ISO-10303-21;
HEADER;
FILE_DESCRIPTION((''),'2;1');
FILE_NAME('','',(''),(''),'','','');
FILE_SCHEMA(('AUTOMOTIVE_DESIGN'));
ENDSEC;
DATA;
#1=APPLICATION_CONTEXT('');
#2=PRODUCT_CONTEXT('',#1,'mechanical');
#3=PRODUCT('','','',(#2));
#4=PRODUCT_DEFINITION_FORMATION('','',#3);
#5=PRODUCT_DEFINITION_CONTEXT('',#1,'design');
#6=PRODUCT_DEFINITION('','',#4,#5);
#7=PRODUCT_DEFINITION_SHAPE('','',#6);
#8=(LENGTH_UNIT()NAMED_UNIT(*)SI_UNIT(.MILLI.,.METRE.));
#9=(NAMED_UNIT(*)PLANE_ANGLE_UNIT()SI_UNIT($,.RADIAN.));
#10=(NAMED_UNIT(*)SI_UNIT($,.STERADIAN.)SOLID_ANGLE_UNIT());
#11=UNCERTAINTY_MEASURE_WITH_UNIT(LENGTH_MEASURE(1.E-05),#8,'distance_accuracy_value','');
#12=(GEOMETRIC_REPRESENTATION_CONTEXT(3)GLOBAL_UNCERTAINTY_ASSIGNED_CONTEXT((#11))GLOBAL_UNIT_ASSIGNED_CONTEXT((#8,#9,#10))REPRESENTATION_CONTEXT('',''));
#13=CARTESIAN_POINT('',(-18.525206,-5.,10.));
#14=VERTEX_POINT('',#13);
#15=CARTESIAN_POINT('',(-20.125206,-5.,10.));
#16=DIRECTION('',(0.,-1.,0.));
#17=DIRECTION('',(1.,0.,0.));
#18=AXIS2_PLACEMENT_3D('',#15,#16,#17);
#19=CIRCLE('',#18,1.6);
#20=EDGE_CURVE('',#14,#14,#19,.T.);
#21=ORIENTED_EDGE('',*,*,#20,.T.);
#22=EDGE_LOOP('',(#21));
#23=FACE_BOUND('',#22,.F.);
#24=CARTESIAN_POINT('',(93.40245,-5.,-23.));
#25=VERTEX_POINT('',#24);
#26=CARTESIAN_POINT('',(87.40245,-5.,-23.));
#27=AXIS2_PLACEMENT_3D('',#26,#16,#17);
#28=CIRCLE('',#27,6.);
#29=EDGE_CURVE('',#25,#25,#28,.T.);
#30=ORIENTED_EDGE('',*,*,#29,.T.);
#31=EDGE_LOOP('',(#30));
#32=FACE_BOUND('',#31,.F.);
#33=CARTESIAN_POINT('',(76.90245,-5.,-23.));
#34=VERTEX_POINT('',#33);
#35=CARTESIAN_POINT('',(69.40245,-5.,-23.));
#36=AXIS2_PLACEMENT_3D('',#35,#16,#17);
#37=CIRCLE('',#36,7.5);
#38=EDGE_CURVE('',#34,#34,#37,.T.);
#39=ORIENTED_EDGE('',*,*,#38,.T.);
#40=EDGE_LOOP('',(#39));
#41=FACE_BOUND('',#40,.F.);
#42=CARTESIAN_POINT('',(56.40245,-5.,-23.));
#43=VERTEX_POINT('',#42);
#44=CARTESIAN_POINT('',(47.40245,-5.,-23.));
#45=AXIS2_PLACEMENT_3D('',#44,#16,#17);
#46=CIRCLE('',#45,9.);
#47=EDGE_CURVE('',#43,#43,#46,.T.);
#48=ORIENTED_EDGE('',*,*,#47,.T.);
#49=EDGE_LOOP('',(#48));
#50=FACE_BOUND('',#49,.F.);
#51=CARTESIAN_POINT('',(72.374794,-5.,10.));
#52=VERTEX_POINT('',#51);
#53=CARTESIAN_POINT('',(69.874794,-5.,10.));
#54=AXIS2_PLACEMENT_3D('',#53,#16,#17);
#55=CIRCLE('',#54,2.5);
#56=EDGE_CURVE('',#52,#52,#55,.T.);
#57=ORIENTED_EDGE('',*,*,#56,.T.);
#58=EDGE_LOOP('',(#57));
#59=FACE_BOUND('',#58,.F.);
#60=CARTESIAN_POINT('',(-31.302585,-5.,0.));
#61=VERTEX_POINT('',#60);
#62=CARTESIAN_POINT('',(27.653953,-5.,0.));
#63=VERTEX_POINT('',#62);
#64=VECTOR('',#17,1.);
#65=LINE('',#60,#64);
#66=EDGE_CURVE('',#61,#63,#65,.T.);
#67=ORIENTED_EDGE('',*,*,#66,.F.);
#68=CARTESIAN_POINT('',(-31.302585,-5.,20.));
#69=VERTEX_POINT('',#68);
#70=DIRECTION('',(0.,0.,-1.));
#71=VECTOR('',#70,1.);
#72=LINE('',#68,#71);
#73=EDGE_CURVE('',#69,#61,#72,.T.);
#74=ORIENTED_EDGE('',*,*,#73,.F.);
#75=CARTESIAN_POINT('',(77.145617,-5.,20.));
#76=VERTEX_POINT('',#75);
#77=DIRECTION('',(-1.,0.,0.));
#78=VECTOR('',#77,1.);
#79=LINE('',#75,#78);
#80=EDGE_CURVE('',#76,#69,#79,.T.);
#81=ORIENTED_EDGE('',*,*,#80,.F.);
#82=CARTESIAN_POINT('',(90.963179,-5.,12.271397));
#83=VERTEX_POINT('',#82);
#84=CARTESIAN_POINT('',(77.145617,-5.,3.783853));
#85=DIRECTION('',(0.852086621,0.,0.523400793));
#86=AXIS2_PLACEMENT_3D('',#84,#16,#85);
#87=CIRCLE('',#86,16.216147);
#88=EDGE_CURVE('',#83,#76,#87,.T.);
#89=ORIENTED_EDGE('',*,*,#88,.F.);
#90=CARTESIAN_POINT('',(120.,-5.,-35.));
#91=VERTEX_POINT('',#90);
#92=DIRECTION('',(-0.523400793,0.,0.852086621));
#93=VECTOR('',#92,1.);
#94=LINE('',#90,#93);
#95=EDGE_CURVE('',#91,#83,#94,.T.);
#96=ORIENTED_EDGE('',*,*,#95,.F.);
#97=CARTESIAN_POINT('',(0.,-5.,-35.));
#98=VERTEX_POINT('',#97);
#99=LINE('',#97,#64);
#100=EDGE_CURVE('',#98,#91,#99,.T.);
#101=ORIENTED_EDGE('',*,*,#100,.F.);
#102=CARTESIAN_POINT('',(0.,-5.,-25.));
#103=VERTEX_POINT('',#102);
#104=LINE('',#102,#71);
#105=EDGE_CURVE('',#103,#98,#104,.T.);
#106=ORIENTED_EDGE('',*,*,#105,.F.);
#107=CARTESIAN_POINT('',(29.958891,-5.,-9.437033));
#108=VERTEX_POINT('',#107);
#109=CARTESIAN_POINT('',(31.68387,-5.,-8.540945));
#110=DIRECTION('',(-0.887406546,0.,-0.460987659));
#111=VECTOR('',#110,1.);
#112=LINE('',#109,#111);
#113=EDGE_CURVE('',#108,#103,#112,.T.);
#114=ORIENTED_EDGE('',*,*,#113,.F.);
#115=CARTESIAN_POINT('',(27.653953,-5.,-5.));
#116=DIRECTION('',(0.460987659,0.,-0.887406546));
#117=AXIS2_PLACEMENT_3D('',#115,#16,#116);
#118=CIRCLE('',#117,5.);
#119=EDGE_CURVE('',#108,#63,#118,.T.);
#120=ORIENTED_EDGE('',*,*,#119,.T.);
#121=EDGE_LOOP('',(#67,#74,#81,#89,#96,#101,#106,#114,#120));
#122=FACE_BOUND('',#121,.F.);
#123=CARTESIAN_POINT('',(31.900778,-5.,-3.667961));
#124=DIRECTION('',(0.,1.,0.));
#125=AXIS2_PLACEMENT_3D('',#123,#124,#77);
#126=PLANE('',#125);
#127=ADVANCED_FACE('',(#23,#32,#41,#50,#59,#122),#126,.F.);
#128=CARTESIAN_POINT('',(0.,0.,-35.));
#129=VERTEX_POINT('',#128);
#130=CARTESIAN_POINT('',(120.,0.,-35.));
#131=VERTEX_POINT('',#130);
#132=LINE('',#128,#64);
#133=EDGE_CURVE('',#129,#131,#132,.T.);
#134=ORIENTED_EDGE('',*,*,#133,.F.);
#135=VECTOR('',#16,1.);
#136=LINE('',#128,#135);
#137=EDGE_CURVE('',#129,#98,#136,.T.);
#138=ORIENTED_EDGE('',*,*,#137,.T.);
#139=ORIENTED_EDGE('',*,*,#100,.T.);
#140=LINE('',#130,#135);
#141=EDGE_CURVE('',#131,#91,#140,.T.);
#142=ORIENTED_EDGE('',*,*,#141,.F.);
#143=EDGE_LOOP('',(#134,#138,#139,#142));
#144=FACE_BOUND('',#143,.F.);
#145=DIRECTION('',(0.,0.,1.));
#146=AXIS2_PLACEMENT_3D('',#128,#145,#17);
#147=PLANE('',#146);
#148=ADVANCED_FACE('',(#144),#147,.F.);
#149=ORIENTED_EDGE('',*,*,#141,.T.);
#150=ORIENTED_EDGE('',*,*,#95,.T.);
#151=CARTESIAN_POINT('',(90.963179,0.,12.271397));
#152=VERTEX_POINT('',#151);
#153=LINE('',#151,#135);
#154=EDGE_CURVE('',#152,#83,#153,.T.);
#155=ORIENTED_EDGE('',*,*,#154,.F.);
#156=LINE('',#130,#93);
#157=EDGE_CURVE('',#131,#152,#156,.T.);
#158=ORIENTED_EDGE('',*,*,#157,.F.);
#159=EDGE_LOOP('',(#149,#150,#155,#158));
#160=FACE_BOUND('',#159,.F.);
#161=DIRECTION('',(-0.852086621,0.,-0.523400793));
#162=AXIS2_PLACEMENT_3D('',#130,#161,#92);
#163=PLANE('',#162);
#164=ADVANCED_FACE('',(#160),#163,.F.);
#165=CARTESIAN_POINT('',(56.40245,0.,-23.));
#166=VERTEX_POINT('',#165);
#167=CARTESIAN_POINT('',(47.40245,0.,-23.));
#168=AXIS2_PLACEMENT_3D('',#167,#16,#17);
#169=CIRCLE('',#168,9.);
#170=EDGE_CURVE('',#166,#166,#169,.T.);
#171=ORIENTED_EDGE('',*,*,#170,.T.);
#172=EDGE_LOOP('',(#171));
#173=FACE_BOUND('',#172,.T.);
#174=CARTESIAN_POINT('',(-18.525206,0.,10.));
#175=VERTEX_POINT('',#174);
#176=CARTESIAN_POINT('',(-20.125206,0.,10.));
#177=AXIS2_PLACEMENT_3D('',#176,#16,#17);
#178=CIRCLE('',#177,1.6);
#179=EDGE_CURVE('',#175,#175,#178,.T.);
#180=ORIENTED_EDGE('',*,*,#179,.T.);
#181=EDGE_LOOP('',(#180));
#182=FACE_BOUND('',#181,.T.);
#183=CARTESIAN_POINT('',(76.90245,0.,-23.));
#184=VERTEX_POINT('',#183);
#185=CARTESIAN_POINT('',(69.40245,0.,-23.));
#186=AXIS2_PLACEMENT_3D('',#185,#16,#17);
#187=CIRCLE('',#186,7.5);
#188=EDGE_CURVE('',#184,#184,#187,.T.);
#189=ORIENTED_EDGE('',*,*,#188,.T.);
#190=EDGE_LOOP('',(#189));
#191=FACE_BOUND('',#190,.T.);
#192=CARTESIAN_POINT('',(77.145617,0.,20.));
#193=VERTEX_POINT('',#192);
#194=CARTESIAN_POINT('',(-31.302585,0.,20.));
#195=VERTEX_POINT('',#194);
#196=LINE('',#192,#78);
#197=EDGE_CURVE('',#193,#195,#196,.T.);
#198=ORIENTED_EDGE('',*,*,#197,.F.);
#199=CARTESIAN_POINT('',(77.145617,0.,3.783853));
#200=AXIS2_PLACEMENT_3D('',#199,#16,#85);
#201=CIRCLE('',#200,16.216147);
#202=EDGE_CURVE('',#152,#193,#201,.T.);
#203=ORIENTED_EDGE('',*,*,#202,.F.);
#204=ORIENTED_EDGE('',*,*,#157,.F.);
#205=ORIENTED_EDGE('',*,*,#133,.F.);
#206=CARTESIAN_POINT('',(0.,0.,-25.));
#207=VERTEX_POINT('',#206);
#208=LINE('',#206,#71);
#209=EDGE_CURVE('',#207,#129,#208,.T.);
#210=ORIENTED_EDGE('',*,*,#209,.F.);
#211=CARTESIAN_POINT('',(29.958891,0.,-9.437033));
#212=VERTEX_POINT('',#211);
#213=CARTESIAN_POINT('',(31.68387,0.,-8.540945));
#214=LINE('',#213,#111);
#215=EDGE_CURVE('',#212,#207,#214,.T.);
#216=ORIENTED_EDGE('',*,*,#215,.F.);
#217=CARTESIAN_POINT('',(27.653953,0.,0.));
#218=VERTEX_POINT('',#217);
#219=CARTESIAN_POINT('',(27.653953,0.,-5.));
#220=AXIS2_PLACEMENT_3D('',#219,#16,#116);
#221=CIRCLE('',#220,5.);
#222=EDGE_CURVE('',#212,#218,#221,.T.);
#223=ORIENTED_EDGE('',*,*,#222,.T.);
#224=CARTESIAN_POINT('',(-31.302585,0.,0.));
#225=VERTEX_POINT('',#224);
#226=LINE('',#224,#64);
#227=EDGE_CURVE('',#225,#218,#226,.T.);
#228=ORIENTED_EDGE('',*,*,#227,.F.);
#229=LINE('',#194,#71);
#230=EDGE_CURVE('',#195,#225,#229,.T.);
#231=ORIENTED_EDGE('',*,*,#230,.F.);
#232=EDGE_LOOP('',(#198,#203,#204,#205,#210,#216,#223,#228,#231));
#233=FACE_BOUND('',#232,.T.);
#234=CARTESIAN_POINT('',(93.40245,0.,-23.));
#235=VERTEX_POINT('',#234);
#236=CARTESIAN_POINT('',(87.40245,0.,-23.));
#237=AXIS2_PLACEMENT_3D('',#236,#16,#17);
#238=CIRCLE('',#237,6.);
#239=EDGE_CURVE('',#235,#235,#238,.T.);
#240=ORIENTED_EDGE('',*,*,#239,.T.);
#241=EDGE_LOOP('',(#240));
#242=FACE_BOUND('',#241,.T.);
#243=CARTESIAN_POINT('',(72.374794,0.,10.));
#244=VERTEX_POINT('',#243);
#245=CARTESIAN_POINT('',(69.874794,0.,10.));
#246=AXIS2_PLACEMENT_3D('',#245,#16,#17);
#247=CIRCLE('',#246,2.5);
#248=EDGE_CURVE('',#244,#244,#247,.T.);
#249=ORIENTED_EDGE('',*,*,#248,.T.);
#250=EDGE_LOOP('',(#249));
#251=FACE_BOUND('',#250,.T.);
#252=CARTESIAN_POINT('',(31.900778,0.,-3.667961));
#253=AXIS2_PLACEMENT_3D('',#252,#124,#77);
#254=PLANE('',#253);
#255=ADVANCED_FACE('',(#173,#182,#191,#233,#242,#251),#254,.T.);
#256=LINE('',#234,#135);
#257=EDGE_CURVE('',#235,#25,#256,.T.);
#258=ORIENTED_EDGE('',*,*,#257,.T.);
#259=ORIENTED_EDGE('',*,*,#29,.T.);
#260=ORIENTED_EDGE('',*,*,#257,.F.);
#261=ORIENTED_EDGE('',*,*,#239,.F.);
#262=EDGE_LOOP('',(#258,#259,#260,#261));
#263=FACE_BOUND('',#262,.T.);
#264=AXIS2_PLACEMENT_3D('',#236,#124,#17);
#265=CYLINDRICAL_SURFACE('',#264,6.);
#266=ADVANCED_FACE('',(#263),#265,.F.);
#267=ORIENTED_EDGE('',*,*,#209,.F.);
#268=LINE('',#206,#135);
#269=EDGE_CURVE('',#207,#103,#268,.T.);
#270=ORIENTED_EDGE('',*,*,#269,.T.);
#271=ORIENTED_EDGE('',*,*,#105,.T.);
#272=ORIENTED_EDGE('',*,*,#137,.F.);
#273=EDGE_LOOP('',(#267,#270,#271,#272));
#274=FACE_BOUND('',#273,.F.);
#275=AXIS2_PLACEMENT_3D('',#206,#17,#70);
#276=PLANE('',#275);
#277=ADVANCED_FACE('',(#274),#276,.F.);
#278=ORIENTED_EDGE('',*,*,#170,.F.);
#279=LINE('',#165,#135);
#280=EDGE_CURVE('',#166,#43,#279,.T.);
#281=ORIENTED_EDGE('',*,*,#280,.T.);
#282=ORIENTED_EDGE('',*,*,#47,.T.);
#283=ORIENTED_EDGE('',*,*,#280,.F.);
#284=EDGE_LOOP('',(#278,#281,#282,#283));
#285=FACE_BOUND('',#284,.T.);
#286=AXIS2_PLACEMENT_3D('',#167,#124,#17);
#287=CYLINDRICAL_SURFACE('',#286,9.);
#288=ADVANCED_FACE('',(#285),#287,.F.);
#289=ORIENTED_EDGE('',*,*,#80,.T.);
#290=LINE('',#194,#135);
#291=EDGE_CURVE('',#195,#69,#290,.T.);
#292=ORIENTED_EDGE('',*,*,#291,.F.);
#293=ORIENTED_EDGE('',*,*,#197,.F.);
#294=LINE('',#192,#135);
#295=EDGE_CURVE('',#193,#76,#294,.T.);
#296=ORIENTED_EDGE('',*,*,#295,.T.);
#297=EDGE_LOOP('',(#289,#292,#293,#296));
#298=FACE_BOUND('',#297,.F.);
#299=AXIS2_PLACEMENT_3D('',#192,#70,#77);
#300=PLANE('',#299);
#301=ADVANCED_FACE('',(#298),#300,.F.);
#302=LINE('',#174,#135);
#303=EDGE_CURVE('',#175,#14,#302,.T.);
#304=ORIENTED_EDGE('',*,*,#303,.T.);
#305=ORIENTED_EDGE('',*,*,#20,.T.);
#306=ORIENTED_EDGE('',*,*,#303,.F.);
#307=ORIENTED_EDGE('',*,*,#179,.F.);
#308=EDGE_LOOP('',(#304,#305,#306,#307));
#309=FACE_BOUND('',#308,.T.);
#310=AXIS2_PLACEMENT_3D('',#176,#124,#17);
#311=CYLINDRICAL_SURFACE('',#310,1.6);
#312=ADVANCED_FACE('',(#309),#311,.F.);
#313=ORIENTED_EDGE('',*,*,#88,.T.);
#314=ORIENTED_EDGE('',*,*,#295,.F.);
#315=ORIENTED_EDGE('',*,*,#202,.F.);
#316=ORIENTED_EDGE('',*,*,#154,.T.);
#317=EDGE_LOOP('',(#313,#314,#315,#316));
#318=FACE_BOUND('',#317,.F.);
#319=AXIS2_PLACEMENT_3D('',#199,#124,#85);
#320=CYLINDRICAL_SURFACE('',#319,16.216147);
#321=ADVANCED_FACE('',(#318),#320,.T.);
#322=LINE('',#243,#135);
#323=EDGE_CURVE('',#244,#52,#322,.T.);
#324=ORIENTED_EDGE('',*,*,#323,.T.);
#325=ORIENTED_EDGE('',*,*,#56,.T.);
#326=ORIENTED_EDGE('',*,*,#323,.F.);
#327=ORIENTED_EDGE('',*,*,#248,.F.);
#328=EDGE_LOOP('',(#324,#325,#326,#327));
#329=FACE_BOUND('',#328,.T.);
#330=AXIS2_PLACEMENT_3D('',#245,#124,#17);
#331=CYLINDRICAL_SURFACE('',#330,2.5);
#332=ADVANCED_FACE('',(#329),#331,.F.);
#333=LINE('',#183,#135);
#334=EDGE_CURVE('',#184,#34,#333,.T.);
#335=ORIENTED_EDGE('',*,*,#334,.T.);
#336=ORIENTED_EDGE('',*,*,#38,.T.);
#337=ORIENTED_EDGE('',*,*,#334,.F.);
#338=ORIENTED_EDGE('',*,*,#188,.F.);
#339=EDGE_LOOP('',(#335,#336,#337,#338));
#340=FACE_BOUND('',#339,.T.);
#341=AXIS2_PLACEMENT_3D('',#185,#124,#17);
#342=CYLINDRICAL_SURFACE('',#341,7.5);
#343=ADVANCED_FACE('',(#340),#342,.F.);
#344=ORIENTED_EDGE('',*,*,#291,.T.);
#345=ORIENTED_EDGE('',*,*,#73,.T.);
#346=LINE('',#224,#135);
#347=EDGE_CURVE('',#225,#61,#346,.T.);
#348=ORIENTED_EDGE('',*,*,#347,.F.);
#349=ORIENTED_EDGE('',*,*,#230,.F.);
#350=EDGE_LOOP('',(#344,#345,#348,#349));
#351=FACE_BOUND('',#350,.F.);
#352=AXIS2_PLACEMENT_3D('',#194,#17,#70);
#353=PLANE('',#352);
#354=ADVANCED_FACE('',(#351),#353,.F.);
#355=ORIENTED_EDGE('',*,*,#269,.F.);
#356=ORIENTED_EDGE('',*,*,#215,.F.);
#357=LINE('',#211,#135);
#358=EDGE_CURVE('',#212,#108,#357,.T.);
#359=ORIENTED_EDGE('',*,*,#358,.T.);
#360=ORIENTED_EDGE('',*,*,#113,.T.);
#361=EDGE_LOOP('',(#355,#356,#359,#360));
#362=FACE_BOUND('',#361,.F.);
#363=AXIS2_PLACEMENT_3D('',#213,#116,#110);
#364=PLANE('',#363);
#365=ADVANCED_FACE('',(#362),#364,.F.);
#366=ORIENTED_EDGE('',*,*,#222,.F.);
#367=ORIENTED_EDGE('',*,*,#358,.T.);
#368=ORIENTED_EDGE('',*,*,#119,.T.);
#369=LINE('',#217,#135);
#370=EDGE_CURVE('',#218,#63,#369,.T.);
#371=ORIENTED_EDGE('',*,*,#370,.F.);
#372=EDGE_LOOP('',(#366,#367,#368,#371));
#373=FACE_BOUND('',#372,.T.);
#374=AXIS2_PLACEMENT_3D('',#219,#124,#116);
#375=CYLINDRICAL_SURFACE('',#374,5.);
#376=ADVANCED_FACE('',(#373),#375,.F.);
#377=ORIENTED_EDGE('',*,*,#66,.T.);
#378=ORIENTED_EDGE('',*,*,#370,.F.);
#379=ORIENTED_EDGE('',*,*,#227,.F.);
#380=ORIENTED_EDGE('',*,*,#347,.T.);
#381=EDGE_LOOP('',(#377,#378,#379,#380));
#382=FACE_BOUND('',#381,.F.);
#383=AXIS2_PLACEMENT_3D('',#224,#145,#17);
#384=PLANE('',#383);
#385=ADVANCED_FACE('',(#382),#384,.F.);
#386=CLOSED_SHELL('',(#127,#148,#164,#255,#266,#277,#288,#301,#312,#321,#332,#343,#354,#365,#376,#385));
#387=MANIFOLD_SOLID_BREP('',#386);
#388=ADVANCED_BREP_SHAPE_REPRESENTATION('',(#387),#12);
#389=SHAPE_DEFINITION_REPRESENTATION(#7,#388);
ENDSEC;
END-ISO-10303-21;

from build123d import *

# Parameters (mm, degrees)
F0_R        = 9
F0_R_2      = 7.5
F0_R_3      = 6
F0_R_4      = 1.6
F0_R_5      = 2.5
F1_DEPTH    = 5
F2_T1_DEPTH = 5


# Not quite as in the source:
# - a fillet or chamfer that OpenCascade refuses, or shapes differently, is made with other operations: its cross-section is extruded or revolved along the edge and cut away or added


with BuildPart() as f1:
    # F0 (on Front) → F1 (new body)
    with BuildSketch(Plane.XZ):
        with BuildLine():
            Line((77.14561722, 20), (-0.2484538774, 20))
            Line((-0.2484538774, 20), (-29.0604767571, 20))
            Line((-29.0604767571, 20), (-31.3025846086, 20))
            Line((-31.3025846086, 20), (-31.3025846086, 0))
            Line((-31.3025846086, 0), (0, 0))
            Line((0, 0), (33.9829302539, 0))
            ThreePointArc((33.9829302539, 0), (34.7117105365, -4.7760782671), (31.6838696315, -8.540945299))
            Line((31.6838696315, -8.540945299), (0, -25))
            Line((0, -25), (0, -35))
            Line((0, -35), (120, -35))
            Line((120, -35), (90.9631787703, 12.2713973983))
            ThreePointArc((90.9631787703, 12.2713973983), (85.0616816679, 17.9365681271), (77.14561722, 20))
        make_face()
        with Locations((47.4024499138, -23)):
            Circle(F0_R, mode=Mode.SUBTRACT)
        with Locations((69.4024499138, -23)):
            Circle(F0_R_2, mode=Mode.SUBTRACT)
        with Locations((87.4024499138, -23)):
            Circle(F0_R_3, mode=Mode.SUBTRACT)
        with Locations((-20.1252056134, 10)):
            Circle(F0_R_4, mode=Mode.SUBTRACT)
        with Locations((69.8747943866, 10)):
            Circle(F0_R_5, mode=Mode.SUBTRACT)
    extrude(amount=F1_DEPTH)

    # F2: fillet of radius 5 on 2 edges, made by hand

    # F2_s2 → F2_t1 (join)
    with BuildSketch(Plane.XZ):
        with BuildLine():
            ThreePointArc((29.9588910165, -9.4370327313), (32.5111722793, -3.8136534352), (27.6539527219, 0))
            Line((27.6539527219, 0), (27.6539527219, 0.5))
            Line((27.6539527219, 0.5), (33.9829302539, 0.5))
            Line((33.9829302539, 0.5), (34.4050124686, 0.2680421685))
            ThreePointArc((34.4050124686, 0.2680421685), (31.914363461, -8.9846485721), (30.189384846, -9.8807360044))
            Line((30.189384846, -9.8807360044), (29.9588910165, -9.4370327313))
        make_face()
    extrude(amount=F2_T1_DEPTH)


solid = f1.part
